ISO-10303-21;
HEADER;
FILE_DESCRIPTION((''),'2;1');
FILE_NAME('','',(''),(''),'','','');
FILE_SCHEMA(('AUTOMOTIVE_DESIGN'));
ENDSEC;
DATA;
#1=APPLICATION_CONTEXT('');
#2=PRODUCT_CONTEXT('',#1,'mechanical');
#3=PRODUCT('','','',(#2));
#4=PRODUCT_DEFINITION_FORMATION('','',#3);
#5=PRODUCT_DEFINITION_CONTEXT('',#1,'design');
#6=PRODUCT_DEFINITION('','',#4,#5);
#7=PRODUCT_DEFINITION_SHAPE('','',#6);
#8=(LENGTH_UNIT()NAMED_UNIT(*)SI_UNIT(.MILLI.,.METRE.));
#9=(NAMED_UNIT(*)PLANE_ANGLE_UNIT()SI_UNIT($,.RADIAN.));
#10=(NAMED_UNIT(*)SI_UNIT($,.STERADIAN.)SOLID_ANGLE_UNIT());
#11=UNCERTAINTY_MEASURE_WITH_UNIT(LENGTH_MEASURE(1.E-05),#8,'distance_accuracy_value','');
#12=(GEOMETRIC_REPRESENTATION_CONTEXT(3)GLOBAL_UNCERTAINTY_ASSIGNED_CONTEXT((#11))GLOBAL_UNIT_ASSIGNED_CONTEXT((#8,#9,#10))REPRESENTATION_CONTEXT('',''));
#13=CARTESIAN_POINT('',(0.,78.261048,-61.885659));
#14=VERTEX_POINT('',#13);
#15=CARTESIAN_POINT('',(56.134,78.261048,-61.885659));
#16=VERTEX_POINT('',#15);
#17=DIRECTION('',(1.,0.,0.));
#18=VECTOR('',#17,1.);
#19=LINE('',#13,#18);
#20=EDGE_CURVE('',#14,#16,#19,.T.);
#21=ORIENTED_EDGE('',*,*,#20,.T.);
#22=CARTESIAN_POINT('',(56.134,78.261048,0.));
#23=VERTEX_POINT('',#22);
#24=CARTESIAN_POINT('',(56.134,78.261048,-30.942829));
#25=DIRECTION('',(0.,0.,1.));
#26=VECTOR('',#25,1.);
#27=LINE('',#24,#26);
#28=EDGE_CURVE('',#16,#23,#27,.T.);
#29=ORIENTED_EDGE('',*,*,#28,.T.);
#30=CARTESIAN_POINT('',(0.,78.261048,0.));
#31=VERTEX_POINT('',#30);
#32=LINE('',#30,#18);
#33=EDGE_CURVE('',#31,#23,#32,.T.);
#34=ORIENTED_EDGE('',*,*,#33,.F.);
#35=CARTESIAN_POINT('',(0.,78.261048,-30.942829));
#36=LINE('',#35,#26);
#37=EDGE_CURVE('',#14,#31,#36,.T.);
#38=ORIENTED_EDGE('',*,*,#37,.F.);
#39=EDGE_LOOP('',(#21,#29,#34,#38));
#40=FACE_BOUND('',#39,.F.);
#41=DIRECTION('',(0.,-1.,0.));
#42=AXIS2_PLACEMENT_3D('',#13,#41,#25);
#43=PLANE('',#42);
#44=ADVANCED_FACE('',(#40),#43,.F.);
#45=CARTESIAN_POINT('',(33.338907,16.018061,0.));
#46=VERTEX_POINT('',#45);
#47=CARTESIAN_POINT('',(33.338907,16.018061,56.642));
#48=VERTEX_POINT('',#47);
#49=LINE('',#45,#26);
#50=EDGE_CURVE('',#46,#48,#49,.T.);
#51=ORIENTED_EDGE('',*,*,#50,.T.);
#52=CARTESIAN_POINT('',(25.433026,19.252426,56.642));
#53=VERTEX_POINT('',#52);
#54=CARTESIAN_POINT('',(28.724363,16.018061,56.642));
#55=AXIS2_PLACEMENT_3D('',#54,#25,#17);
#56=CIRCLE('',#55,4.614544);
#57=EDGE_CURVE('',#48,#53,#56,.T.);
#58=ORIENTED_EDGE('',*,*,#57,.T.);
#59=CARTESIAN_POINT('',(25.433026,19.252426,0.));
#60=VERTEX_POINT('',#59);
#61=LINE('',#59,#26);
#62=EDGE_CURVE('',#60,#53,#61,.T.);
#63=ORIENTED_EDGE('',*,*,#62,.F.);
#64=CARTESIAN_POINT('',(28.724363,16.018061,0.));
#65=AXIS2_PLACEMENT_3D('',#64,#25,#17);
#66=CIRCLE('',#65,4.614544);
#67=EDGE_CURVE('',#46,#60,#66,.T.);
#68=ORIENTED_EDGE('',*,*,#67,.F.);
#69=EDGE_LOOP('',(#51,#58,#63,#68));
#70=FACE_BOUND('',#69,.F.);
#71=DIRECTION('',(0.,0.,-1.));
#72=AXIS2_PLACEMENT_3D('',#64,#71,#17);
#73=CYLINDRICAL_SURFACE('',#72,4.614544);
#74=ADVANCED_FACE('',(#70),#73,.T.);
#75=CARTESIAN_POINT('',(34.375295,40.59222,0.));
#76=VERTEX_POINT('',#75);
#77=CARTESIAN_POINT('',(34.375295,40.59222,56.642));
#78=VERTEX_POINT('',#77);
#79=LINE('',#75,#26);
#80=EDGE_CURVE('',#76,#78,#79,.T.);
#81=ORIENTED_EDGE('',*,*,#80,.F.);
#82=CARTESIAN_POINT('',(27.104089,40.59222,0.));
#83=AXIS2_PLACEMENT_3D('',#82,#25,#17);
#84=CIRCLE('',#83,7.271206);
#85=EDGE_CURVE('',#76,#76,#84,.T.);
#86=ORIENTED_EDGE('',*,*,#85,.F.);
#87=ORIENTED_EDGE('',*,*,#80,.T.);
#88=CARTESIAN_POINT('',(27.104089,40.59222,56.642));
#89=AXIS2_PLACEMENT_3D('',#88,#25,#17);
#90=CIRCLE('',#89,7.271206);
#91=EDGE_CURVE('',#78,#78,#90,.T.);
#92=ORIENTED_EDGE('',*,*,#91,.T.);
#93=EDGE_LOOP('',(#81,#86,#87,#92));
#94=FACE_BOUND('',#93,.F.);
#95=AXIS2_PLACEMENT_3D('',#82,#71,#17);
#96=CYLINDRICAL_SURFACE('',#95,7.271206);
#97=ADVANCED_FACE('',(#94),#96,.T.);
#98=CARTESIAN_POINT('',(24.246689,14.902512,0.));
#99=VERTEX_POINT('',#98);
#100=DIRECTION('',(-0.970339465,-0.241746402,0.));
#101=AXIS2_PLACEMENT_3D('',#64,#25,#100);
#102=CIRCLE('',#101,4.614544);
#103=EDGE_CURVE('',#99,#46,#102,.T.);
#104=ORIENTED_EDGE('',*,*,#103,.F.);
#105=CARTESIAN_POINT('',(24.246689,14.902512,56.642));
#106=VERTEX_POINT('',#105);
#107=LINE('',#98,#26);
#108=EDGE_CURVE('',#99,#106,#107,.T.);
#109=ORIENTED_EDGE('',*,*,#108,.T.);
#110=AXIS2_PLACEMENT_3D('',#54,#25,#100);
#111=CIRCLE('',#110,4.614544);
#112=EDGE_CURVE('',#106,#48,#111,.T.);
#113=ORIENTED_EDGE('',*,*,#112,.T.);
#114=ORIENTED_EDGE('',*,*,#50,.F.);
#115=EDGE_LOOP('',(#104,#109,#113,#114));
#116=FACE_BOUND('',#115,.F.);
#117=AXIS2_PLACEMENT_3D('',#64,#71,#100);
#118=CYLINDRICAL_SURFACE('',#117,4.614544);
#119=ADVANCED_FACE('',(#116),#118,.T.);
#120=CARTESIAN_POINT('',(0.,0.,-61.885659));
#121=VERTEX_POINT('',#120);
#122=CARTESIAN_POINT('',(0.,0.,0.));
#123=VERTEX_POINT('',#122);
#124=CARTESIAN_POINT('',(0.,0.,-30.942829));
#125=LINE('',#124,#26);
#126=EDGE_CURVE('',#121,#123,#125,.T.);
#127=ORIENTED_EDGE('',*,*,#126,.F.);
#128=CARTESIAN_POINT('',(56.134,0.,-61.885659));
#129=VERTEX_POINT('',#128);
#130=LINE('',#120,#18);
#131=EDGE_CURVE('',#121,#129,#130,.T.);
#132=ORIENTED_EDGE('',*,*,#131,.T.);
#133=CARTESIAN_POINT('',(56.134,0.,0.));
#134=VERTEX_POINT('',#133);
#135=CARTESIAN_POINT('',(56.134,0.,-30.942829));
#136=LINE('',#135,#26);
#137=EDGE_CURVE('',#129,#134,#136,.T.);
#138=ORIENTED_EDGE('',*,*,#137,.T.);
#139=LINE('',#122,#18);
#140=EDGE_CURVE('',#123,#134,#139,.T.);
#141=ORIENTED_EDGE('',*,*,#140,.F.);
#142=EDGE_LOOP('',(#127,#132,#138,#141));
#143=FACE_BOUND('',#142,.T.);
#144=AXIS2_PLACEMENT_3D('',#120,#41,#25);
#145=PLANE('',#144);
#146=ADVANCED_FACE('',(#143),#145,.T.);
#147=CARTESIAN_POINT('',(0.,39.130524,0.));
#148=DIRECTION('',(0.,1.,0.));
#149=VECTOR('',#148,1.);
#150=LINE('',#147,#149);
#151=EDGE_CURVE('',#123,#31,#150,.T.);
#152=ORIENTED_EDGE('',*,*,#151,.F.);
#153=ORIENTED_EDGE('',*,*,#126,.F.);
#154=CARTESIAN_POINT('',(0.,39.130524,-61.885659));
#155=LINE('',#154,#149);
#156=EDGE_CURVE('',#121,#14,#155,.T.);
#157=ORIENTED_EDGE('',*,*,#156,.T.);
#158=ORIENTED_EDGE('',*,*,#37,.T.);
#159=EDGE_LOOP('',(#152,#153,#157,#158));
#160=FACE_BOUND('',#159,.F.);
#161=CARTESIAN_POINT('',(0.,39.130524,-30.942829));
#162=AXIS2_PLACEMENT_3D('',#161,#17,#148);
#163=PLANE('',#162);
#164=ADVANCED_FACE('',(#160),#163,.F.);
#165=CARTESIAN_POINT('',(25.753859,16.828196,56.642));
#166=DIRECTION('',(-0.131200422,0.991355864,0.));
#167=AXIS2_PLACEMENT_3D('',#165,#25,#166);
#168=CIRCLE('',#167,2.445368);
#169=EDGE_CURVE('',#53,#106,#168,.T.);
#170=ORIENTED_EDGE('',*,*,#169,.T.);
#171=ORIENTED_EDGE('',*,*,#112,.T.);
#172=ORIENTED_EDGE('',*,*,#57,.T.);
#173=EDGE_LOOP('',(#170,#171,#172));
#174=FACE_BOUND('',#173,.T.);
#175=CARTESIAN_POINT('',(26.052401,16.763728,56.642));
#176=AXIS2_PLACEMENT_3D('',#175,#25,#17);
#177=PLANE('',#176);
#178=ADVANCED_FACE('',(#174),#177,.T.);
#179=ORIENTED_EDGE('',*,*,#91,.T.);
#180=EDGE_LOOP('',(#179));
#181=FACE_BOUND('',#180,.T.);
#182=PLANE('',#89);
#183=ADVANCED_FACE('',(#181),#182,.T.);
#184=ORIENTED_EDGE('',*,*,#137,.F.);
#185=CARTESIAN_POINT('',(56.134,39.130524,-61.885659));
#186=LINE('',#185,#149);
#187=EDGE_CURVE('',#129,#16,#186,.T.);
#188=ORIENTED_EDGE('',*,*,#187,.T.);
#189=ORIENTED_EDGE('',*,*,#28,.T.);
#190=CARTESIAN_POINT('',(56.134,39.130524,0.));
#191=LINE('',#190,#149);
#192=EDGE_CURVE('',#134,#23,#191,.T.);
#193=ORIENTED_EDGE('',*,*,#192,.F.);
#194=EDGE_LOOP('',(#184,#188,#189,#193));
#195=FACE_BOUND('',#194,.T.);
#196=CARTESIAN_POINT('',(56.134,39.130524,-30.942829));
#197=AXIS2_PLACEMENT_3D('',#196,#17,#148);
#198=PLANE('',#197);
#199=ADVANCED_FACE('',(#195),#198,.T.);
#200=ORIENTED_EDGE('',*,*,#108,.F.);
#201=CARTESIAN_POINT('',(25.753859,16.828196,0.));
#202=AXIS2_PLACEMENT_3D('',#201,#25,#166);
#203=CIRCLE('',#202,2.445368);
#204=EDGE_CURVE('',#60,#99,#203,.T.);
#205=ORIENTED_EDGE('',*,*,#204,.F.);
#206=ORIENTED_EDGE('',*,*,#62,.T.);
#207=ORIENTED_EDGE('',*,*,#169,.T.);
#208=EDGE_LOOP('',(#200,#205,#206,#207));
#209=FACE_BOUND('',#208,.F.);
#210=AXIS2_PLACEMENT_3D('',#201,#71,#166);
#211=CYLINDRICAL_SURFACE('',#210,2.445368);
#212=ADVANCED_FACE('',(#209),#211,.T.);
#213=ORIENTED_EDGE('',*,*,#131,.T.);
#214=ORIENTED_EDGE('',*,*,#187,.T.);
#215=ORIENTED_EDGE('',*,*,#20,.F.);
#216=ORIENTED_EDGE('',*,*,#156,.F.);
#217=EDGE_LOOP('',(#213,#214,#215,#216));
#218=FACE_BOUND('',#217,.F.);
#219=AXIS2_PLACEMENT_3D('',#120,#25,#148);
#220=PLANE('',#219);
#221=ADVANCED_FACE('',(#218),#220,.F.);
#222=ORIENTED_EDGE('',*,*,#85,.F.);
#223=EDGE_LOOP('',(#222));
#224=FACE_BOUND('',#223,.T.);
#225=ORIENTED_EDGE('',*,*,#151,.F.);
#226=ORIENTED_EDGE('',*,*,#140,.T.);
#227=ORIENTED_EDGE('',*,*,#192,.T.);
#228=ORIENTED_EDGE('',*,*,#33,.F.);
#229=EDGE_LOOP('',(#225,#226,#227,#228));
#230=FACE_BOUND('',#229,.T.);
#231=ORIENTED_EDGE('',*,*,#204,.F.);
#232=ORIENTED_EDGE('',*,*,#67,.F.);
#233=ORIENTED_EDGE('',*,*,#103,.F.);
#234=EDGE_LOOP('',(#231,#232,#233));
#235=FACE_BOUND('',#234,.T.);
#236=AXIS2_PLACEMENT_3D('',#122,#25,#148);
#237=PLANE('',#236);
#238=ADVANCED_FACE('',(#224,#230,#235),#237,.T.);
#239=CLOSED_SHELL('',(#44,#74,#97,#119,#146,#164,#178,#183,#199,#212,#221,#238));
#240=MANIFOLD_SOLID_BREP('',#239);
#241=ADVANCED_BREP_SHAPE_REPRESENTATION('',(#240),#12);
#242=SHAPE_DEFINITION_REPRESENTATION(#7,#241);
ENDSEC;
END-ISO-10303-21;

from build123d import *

# Parameters (mm, degrees)
F0_W     = 78.2610476017
F0_H     = 61.8856586516
F1_DEPTH = 56.134
F4_R     = 7.271205843
F5_DEPTH = 56.642


# Not quite as in the source:
# - the program builds the solid bodies; features that only make, move or delete a surface that nothing else refers to are left out


with BuildPart() as f1:
    # F0 (on Right) → F1 (new body)
    with BuildSketch(Plane.YZ):
        with Locations((39.1305238008, -30.9428293258)):
            Rectangle(F0_W, F0_H)
    extrude(amount=F1_DEPTH)

    # F4 (on face) → F5 (join)
    with BuildSketch(Plane.XY):
        with Locations((27.1040890366, 40.5922196805)):
            Circle(F4_R)
        with BuildLine():
            ThreePointArc((24.2466891936, 14.9025116275), (26.8248957449, 14.6298549046), (28.1992270717, 16.8281961232))
            ThreePointArc((28.1992270717, 16.8281961232), (27.3655770879, 18.6672690129), (25.4330261647, 19.2524256742))
            ThreePointArc((25.4330261647, 19.2524256742), (24.2724174076, 17.232224668), (24.2466891936, 14.9025116275))
        make_face()
        with BuildLine():
            ThreePointArc((25.4330261647, 19.2524256742), (27.3655770879, 18.6672690129), (28.1992270717, 16.8281961232))
            ThreePointArc((28.1992270717, 16.8281961232), (26.8248957449, 14.6298549046), (24.2466891936, 14.9025116275))
            ThreePointArc((24.2466891936, 14.9025116275), (29.2863202966, 11.4378625234), (33.3389067896, 16.0180609673))
            ThreePointArc((33.3389067896, 16.0180609673), (30.4716460582, 20.2890111986), (25.4330261647, 19.2524256742))
        make_face()
        with BuildLine():
            ThreePointArc((24.2466891936, 14.9025116275), (24.2724174076, 17.232224668), (25.4330261647, 19.2524256742))
            ThreePointArc((25.4330261647, 19.2524256742), (23.394656757, 17.4716132859), (24.2466891936, 14.9025116275))
        make_face()
    extrude(amount=F5_DEPTH)


solid = f1.part
